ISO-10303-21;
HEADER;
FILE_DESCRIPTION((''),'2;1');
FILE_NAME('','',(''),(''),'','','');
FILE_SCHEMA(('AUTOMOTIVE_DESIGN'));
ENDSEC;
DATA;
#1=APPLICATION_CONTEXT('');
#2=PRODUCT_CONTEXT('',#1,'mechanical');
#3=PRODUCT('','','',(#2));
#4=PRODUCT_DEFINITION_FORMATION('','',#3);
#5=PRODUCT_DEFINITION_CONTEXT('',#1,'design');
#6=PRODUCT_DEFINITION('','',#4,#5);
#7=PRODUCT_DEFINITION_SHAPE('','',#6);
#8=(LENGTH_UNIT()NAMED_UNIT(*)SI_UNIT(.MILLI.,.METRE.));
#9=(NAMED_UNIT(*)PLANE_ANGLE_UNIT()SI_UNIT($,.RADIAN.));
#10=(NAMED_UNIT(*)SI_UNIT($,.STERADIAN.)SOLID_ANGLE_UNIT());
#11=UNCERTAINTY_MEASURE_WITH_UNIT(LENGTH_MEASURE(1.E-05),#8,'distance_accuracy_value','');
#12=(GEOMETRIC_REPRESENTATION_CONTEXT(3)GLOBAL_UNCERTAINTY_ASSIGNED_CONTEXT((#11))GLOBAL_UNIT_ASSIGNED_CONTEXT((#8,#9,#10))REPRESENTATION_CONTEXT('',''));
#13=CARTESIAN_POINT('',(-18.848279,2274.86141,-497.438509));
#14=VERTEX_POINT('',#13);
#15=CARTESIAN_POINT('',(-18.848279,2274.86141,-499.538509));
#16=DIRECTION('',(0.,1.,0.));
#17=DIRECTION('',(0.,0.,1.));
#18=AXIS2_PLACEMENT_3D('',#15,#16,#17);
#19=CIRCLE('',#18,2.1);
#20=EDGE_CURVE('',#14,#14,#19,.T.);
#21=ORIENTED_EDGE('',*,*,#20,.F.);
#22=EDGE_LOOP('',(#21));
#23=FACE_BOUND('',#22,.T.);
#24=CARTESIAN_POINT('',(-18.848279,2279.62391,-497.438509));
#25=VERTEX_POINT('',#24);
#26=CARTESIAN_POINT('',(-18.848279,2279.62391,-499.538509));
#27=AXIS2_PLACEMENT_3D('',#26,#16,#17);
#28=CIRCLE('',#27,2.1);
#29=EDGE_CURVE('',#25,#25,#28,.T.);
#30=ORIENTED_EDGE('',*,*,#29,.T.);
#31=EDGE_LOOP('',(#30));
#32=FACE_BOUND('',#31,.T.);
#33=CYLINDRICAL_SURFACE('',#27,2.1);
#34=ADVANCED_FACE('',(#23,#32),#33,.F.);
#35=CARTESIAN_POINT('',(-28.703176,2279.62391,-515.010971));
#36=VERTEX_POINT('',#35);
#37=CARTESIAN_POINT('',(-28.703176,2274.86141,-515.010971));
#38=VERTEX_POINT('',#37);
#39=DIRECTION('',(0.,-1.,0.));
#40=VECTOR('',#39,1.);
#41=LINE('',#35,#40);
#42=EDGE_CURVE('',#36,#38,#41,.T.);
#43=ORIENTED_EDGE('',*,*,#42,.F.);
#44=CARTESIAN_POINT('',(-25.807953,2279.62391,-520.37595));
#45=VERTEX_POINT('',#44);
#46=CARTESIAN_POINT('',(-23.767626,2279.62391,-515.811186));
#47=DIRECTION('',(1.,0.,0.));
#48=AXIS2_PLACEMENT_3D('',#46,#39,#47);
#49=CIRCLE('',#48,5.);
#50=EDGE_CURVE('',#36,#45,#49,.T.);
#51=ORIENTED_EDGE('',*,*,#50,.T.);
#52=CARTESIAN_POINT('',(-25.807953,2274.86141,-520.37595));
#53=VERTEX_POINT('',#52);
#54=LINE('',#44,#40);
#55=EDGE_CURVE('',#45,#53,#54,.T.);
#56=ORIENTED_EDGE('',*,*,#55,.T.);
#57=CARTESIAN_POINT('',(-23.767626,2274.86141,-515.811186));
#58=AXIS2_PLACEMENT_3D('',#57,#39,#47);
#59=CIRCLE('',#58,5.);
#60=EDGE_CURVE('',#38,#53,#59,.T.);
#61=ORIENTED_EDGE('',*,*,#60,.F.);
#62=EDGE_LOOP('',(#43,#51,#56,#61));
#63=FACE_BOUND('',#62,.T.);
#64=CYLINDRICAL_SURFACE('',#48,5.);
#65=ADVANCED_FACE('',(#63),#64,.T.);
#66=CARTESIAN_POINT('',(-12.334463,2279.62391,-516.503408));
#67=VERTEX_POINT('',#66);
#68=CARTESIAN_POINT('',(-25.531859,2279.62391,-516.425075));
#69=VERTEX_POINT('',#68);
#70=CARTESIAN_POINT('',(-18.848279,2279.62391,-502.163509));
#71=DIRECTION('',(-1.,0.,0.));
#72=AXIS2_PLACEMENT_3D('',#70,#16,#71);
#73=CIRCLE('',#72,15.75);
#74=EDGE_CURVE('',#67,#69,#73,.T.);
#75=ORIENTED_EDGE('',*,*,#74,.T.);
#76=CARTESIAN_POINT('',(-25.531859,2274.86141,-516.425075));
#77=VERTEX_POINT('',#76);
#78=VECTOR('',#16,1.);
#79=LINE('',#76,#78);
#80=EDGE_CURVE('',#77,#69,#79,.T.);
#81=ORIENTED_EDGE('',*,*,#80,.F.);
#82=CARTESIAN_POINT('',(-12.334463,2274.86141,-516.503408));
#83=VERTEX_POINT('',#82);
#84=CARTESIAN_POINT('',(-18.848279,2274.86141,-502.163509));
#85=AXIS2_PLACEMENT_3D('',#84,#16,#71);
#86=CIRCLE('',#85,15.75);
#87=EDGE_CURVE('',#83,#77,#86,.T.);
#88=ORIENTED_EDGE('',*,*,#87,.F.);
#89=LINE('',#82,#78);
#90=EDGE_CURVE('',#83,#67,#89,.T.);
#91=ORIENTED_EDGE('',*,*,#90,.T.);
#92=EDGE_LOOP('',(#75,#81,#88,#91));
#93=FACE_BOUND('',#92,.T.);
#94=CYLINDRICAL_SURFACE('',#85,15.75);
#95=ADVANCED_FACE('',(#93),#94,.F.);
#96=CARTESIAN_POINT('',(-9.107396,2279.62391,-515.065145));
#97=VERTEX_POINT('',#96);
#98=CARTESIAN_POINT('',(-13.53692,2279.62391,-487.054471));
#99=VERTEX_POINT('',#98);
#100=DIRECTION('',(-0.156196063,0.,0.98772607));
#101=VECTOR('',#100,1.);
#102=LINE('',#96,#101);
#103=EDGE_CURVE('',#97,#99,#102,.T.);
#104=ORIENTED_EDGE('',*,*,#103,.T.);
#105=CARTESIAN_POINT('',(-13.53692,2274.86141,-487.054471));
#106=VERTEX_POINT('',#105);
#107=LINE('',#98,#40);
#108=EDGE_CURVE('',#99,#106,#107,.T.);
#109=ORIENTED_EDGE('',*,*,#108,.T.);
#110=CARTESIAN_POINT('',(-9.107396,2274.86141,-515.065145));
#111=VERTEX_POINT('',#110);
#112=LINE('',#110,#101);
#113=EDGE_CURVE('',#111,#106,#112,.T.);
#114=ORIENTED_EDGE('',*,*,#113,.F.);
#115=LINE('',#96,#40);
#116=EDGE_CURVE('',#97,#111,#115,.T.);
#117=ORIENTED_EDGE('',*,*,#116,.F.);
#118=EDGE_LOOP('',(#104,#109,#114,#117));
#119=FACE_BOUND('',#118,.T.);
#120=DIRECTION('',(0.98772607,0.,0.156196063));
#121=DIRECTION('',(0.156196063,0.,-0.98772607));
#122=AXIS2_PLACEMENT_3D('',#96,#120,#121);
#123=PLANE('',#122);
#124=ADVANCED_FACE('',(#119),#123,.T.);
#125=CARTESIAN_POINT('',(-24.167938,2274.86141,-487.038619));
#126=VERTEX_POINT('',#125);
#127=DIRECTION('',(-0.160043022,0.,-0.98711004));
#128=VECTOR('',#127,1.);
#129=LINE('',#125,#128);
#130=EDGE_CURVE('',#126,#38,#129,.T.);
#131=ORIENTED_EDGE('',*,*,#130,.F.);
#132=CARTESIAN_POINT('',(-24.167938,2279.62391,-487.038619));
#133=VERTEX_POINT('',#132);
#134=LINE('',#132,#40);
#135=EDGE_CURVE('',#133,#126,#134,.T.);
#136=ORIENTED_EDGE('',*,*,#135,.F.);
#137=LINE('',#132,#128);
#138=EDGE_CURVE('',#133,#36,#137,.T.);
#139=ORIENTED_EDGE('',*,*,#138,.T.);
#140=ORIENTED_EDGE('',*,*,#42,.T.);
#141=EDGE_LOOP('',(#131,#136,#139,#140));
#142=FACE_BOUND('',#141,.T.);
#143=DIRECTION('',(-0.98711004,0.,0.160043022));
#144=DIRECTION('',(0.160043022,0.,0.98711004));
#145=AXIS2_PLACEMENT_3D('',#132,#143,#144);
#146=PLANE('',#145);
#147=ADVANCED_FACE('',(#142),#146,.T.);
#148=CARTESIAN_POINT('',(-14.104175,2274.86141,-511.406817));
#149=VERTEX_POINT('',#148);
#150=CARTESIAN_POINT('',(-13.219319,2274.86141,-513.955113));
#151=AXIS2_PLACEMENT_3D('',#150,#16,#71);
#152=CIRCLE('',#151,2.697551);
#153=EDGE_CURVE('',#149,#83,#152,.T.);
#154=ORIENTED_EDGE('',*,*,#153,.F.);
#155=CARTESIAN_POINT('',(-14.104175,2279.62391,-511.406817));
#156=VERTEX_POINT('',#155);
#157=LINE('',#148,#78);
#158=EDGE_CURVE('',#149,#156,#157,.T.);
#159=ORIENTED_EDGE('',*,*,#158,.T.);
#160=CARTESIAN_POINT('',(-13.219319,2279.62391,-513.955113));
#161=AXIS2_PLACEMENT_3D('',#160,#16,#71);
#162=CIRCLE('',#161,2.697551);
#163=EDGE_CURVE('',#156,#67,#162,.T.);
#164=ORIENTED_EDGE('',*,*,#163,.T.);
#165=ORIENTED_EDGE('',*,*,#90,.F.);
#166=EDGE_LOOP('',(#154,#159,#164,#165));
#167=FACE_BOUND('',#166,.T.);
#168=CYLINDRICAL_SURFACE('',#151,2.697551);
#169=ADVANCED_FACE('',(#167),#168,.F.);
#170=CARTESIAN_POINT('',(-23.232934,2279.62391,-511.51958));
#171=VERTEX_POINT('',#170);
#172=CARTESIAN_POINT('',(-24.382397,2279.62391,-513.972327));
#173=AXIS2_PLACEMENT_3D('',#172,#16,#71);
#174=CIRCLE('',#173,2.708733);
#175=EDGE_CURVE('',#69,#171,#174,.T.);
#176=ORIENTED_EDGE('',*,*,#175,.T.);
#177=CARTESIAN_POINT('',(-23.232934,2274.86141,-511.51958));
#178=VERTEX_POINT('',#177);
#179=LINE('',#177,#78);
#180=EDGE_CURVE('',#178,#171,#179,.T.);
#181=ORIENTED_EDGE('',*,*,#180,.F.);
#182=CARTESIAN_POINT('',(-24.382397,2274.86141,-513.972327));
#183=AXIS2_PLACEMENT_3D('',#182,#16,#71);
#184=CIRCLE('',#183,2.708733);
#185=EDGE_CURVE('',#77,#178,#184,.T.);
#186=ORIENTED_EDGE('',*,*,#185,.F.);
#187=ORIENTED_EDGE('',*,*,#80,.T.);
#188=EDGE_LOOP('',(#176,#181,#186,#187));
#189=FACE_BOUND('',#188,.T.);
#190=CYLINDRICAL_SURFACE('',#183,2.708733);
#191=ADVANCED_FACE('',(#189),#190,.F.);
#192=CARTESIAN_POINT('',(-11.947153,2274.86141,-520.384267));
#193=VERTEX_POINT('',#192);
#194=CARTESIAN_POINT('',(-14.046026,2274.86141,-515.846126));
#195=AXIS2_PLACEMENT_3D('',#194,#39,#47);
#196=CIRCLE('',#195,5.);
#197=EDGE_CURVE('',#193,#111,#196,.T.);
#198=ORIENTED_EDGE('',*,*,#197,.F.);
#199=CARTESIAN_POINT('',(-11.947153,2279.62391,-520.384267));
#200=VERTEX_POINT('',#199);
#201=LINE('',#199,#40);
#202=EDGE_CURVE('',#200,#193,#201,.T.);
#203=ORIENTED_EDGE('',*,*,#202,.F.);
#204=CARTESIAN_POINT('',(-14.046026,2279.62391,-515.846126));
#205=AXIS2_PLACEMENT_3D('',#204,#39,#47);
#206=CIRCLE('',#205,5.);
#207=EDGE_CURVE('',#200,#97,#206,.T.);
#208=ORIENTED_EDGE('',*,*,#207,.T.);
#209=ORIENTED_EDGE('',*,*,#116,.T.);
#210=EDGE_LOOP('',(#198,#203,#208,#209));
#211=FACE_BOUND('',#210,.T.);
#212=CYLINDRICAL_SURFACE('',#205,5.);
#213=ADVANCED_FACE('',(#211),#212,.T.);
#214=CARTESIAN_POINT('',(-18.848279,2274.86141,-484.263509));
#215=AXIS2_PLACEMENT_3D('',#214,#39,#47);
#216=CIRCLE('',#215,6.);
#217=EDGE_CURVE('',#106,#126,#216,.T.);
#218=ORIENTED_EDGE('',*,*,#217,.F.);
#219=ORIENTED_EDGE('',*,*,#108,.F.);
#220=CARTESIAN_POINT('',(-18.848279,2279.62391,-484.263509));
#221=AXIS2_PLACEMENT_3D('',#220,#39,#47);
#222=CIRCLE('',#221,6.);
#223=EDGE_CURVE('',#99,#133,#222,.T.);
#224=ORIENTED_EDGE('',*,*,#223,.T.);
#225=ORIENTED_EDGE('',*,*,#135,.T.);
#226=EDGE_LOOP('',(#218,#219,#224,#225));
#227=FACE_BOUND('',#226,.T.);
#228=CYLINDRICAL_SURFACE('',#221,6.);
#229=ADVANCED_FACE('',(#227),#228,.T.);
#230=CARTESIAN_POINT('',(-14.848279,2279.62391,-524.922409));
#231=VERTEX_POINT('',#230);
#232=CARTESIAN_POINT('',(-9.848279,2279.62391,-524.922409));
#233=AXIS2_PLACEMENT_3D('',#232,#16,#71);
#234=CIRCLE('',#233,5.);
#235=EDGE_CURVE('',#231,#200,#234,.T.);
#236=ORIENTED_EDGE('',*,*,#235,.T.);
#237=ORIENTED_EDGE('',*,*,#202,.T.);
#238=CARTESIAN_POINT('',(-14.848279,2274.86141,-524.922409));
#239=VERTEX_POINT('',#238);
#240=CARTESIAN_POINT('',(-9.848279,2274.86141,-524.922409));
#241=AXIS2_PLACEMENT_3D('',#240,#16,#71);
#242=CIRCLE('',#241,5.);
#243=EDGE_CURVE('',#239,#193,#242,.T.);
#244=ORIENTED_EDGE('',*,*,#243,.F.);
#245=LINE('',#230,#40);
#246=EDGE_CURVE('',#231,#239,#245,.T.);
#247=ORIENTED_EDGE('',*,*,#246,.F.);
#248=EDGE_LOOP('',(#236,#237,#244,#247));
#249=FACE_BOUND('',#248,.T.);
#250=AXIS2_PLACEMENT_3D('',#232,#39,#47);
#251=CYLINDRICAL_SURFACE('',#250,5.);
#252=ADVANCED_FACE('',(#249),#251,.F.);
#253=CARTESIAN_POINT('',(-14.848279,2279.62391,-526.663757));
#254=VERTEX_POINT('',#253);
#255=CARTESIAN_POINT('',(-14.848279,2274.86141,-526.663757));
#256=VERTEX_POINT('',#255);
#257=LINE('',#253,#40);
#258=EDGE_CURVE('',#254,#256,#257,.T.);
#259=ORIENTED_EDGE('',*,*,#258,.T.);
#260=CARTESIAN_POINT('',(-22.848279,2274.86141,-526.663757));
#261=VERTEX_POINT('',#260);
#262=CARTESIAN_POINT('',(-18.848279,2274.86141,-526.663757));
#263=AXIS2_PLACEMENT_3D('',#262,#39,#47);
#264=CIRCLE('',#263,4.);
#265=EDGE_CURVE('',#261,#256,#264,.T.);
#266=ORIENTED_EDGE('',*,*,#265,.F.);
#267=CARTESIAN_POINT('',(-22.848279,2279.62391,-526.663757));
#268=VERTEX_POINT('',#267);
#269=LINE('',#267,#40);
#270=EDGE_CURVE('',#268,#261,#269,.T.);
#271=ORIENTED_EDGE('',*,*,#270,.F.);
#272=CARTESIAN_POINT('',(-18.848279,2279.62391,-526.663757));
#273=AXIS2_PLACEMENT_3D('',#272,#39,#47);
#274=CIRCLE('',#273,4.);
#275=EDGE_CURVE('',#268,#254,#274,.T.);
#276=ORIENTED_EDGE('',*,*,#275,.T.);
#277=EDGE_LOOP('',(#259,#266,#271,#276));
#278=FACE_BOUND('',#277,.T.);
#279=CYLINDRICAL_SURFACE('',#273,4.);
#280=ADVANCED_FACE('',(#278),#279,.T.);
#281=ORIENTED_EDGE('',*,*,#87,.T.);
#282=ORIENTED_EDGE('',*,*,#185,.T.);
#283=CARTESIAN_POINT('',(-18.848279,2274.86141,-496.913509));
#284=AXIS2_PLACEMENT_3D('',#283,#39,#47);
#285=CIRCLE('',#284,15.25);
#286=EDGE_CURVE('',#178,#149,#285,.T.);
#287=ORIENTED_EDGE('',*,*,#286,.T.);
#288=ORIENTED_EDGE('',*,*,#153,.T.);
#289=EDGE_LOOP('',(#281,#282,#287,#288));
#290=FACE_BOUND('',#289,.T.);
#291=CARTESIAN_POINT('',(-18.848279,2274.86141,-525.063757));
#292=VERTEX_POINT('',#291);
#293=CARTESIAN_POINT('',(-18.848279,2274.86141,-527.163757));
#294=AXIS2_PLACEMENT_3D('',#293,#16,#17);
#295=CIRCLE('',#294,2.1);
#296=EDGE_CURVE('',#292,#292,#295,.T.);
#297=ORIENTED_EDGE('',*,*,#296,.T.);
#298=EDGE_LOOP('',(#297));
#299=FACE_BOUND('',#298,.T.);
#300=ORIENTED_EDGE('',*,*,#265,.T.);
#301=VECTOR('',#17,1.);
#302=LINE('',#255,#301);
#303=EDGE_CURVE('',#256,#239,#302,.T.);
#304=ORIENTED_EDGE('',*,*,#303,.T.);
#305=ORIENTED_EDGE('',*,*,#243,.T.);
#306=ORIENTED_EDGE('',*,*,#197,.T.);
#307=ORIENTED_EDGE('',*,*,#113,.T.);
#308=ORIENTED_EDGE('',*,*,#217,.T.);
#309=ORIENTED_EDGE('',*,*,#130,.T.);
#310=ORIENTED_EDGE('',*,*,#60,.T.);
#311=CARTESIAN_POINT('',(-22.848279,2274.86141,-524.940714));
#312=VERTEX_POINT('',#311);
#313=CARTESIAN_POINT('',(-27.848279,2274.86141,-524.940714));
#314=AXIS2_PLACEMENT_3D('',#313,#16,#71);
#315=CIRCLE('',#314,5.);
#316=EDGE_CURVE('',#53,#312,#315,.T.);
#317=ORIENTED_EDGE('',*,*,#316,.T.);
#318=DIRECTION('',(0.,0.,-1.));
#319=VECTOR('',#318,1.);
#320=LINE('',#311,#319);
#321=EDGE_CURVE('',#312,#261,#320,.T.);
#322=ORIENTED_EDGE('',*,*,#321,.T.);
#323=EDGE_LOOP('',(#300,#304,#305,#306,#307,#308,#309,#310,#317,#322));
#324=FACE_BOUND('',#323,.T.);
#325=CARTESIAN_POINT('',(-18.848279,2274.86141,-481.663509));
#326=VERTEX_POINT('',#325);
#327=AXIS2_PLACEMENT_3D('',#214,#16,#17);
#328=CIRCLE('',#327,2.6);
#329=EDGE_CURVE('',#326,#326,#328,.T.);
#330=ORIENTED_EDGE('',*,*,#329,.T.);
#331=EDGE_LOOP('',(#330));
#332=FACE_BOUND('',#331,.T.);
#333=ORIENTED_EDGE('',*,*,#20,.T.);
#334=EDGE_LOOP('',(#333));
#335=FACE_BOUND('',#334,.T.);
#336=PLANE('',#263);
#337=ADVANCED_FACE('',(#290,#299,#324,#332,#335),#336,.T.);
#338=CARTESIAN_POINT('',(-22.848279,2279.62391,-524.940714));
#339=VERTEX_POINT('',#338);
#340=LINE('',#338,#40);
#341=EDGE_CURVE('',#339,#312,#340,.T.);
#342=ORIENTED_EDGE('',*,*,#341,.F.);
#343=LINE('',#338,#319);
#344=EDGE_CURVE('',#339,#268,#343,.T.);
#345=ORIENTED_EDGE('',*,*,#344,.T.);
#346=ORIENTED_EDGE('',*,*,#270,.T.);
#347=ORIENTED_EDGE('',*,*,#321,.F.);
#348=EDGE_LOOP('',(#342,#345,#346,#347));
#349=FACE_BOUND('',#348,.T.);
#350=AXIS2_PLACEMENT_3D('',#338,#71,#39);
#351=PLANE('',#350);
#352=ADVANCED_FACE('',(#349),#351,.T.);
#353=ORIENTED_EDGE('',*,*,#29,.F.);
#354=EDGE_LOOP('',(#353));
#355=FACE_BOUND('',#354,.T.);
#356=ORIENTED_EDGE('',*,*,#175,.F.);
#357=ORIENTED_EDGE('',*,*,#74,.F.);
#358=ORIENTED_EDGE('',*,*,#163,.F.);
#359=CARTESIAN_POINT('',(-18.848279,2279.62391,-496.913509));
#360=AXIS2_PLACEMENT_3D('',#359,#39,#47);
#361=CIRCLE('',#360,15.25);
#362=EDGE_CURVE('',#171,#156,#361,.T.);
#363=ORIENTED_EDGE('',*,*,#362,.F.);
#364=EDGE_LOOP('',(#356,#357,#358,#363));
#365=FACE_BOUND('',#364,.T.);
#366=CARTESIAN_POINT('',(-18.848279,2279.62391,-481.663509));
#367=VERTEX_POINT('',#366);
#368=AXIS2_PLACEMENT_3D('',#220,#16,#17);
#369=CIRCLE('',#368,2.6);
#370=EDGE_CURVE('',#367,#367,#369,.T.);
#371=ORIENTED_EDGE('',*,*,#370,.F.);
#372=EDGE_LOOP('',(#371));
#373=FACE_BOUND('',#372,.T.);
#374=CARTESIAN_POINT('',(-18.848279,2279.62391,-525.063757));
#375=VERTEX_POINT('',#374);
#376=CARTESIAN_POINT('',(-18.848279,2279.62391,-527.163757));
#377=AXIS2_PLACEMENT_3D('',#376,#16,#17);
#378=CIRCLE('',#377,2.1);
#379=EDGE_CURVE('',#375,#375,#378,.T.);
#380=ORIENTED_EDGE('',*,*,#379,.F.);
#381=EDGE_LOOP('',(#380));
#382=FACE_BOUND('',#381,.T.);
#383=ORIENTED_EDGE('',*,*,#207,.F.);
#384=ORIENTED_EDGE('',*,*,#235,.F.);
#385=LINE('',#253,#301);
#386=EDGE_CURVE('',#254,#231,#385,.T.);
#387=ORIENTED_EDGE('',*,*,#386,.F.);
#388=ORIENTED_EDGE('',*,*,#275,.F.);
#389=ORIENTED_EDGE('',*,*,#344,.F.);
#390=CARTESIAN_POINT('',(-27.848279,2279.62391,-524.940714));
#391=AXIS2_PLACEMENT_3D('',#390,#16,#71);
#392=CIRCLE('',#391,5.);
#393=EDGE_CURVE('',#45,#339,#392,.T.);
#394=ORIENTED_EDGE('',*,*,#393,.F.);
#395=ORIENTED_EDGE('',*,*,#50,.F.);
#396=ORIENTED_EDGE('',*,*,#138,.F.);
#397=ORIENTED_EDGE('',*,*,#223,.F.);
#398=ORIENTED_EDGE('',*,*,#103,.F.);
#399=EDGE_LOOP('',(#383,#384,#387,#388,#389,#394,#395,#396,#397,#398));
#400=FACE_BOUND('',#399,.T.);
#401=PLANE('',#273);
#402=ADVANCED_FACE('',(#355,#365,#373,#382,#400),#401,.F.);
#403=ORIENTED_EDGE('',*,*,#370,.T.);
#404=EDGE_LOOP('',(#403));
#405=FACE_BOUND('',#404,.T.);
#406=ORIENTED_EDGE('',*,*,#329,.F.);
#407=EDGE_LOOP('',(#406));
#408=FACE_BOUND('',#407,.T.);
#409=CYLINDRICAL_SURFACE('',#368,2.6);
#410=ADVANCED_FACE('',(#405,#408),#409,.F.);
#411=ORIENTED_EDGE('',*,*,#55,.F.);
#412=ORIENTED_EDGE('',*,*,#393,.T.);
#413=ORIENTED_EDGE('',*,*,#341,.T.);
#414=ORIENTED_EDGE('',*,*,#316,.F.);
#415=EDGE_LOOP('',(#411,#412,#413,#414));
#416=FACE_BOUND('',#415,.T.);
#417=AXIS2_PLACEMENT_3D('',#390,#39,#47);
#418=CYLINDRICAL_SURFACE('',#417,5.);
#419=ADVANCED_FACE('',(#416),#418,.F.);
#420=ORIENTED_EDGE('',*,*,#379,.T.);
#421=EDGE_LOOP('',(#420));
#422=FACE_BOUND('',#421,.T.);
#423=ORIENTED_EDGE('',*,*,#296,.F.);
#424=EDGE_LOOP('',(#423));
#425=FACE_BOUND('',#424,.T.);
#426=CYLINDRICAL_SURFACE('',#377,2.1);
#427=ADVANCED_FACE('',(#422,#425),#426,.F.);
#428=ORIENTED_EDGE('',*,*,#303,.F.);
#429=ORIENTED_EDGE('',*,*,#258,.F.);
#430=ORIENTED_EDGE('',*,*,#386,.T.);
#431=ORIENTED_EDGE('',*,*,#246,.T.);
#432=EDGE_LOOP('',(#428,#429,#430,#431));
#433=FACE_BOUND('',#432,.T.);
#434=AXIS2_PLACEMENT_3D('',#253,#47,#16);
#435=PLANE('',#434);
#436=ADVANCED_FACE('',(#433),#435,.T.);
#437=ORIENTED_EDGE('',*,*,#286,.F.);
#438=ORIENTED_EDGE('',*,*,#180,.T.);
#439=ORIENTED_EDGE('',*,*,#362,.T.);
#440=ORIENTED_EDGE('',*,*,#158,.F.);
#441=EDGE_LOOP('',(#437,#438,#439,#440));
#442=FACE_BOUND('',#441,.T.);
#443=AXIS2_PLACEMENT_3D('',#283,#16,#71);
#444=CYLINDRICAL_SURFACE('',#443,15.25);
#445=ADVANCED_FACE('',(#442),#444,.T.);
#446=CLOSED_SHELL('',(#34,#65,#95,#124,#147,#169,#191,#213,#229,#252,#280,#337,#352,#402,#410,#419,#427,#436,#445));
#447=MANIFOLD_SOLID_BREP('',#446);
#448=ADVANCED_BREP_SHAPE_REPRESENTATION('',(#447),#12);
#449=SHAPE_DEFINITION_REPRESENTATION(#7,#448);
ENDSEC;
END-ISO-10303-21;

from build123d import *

# Parameters (mm, degrees)
BASE_FLANGE1_DEPTH         = 4.7625
CUT_EXTRUDE1_DEPTH         = 532.464280138
F_5_2_5_2_DIAMETER_HOLE1_D = 5.2
F_4_2_4_2_DIAMETER_HOLE1_D = 4.2


# Sheet-metal steps are written as plain solids
with BuildPart() as part:
    # Sketch11 → Base-Flange1 (new body)
    with BuildSketch(Plane.XZ.offset(-2274.861409739)):
        with BuildLine():
            Line((-14.848279171, -526.663757324), (-14.848279171, -524.922409256))
            ThreePointArc((-14.848279171, -524.922409256), (-14.061019769, -522.229303864), (-11.947152511, -520.384267488))
            ThreePointArc((-11.947152511, -520.384267488), (-9.635257269, -518.200933677), (-9.1073955, -515.065145404))
            Line((-9.1073955, -515.065145404), (-13.536920305, -487.054470663))
            ThreePointArc((-13.536920305, -487.054470663), (-18.839332617, -478.263515672), (-24.167937573, -487.038618817))
            Line((-24.167937573, -487.038618817), (-28.703176429, -515.010971128))
            ThreePointArc((-28.703176429, -515.010971128), (-28.167792512, -518.185746554), (-25.8079527, -520.375949969))
            ThreePointArc((-25.8079527, -520.375949969), (-23.652946505, -522.220569615), (-22.848279171, -524.940713697))
            Line((-22.848279171, -524.940713697), (-22.848279171, -526.663757324))
            ThreePointArc((-22.848279171, -526.663757324), (-18.848279171, -530.663757324), (-14.848279171, -526.663757324))
        make_face()
    extrude(amount=-BASE_FLANGE1_DEPTH)

    # Sketch16 → Cut-Extrude1 (cut, through all)
    with BuildSketch(Plane(origin=(0, 2279.623909739, 0), x_dir=(-1, 0, 0), z_dir=(0, 1, 0))):
        with BuildLine():
            ThreePointArc((23.232934356, -511.51957962), (18.659918541, -512.162345688), (14.104175105, -511.406816996))
            ThreePointArc((14.104175105, -511.406816996), (10.671023737, -513.070256662), (12.334463403, -516.50340803))
            ThreePointArc((12.334463403, -516.50340803), (18.94176187, -517.91323157), (25.531859334, -516.425074701))
            ThreePointArc((25.531859334, -516.425074701), (26.835144386, -512.822864672), (23.232934356, -511.51957962))
        make_face()
    extrude(amount=-CUT_EXTRUDE1_DEPTH, mode=Mode.SUBTRACT)

    # Ø5.2 (5.2) Diameter Hole1 (through all)
    with Locations(Plane(origin=(0, 2279.623909739, 0), x_dir=(1, 0, 0), z_dir=(0, 1, 0))):
        with Locations((-18.848279171, 484.263509002)):
            Hole(F_5_2_5_2_DIAMETER_HOLE1_D / 2)

    # Ø4.2 (4.2) Diameter Hole1 (through all)
    with Locations(Plane(origin=(0, 2279.623909739, 0), x_dir=(1, 0, 0), z_dir=(0, 1, 0))):
        with Locations((-18.848279171, 499.538509002), (-18.848279171, 527.163757324)):
            Hole(F_4_2_4_2_DIAMETER_HOLE1_D / 2)


solid = part.part
